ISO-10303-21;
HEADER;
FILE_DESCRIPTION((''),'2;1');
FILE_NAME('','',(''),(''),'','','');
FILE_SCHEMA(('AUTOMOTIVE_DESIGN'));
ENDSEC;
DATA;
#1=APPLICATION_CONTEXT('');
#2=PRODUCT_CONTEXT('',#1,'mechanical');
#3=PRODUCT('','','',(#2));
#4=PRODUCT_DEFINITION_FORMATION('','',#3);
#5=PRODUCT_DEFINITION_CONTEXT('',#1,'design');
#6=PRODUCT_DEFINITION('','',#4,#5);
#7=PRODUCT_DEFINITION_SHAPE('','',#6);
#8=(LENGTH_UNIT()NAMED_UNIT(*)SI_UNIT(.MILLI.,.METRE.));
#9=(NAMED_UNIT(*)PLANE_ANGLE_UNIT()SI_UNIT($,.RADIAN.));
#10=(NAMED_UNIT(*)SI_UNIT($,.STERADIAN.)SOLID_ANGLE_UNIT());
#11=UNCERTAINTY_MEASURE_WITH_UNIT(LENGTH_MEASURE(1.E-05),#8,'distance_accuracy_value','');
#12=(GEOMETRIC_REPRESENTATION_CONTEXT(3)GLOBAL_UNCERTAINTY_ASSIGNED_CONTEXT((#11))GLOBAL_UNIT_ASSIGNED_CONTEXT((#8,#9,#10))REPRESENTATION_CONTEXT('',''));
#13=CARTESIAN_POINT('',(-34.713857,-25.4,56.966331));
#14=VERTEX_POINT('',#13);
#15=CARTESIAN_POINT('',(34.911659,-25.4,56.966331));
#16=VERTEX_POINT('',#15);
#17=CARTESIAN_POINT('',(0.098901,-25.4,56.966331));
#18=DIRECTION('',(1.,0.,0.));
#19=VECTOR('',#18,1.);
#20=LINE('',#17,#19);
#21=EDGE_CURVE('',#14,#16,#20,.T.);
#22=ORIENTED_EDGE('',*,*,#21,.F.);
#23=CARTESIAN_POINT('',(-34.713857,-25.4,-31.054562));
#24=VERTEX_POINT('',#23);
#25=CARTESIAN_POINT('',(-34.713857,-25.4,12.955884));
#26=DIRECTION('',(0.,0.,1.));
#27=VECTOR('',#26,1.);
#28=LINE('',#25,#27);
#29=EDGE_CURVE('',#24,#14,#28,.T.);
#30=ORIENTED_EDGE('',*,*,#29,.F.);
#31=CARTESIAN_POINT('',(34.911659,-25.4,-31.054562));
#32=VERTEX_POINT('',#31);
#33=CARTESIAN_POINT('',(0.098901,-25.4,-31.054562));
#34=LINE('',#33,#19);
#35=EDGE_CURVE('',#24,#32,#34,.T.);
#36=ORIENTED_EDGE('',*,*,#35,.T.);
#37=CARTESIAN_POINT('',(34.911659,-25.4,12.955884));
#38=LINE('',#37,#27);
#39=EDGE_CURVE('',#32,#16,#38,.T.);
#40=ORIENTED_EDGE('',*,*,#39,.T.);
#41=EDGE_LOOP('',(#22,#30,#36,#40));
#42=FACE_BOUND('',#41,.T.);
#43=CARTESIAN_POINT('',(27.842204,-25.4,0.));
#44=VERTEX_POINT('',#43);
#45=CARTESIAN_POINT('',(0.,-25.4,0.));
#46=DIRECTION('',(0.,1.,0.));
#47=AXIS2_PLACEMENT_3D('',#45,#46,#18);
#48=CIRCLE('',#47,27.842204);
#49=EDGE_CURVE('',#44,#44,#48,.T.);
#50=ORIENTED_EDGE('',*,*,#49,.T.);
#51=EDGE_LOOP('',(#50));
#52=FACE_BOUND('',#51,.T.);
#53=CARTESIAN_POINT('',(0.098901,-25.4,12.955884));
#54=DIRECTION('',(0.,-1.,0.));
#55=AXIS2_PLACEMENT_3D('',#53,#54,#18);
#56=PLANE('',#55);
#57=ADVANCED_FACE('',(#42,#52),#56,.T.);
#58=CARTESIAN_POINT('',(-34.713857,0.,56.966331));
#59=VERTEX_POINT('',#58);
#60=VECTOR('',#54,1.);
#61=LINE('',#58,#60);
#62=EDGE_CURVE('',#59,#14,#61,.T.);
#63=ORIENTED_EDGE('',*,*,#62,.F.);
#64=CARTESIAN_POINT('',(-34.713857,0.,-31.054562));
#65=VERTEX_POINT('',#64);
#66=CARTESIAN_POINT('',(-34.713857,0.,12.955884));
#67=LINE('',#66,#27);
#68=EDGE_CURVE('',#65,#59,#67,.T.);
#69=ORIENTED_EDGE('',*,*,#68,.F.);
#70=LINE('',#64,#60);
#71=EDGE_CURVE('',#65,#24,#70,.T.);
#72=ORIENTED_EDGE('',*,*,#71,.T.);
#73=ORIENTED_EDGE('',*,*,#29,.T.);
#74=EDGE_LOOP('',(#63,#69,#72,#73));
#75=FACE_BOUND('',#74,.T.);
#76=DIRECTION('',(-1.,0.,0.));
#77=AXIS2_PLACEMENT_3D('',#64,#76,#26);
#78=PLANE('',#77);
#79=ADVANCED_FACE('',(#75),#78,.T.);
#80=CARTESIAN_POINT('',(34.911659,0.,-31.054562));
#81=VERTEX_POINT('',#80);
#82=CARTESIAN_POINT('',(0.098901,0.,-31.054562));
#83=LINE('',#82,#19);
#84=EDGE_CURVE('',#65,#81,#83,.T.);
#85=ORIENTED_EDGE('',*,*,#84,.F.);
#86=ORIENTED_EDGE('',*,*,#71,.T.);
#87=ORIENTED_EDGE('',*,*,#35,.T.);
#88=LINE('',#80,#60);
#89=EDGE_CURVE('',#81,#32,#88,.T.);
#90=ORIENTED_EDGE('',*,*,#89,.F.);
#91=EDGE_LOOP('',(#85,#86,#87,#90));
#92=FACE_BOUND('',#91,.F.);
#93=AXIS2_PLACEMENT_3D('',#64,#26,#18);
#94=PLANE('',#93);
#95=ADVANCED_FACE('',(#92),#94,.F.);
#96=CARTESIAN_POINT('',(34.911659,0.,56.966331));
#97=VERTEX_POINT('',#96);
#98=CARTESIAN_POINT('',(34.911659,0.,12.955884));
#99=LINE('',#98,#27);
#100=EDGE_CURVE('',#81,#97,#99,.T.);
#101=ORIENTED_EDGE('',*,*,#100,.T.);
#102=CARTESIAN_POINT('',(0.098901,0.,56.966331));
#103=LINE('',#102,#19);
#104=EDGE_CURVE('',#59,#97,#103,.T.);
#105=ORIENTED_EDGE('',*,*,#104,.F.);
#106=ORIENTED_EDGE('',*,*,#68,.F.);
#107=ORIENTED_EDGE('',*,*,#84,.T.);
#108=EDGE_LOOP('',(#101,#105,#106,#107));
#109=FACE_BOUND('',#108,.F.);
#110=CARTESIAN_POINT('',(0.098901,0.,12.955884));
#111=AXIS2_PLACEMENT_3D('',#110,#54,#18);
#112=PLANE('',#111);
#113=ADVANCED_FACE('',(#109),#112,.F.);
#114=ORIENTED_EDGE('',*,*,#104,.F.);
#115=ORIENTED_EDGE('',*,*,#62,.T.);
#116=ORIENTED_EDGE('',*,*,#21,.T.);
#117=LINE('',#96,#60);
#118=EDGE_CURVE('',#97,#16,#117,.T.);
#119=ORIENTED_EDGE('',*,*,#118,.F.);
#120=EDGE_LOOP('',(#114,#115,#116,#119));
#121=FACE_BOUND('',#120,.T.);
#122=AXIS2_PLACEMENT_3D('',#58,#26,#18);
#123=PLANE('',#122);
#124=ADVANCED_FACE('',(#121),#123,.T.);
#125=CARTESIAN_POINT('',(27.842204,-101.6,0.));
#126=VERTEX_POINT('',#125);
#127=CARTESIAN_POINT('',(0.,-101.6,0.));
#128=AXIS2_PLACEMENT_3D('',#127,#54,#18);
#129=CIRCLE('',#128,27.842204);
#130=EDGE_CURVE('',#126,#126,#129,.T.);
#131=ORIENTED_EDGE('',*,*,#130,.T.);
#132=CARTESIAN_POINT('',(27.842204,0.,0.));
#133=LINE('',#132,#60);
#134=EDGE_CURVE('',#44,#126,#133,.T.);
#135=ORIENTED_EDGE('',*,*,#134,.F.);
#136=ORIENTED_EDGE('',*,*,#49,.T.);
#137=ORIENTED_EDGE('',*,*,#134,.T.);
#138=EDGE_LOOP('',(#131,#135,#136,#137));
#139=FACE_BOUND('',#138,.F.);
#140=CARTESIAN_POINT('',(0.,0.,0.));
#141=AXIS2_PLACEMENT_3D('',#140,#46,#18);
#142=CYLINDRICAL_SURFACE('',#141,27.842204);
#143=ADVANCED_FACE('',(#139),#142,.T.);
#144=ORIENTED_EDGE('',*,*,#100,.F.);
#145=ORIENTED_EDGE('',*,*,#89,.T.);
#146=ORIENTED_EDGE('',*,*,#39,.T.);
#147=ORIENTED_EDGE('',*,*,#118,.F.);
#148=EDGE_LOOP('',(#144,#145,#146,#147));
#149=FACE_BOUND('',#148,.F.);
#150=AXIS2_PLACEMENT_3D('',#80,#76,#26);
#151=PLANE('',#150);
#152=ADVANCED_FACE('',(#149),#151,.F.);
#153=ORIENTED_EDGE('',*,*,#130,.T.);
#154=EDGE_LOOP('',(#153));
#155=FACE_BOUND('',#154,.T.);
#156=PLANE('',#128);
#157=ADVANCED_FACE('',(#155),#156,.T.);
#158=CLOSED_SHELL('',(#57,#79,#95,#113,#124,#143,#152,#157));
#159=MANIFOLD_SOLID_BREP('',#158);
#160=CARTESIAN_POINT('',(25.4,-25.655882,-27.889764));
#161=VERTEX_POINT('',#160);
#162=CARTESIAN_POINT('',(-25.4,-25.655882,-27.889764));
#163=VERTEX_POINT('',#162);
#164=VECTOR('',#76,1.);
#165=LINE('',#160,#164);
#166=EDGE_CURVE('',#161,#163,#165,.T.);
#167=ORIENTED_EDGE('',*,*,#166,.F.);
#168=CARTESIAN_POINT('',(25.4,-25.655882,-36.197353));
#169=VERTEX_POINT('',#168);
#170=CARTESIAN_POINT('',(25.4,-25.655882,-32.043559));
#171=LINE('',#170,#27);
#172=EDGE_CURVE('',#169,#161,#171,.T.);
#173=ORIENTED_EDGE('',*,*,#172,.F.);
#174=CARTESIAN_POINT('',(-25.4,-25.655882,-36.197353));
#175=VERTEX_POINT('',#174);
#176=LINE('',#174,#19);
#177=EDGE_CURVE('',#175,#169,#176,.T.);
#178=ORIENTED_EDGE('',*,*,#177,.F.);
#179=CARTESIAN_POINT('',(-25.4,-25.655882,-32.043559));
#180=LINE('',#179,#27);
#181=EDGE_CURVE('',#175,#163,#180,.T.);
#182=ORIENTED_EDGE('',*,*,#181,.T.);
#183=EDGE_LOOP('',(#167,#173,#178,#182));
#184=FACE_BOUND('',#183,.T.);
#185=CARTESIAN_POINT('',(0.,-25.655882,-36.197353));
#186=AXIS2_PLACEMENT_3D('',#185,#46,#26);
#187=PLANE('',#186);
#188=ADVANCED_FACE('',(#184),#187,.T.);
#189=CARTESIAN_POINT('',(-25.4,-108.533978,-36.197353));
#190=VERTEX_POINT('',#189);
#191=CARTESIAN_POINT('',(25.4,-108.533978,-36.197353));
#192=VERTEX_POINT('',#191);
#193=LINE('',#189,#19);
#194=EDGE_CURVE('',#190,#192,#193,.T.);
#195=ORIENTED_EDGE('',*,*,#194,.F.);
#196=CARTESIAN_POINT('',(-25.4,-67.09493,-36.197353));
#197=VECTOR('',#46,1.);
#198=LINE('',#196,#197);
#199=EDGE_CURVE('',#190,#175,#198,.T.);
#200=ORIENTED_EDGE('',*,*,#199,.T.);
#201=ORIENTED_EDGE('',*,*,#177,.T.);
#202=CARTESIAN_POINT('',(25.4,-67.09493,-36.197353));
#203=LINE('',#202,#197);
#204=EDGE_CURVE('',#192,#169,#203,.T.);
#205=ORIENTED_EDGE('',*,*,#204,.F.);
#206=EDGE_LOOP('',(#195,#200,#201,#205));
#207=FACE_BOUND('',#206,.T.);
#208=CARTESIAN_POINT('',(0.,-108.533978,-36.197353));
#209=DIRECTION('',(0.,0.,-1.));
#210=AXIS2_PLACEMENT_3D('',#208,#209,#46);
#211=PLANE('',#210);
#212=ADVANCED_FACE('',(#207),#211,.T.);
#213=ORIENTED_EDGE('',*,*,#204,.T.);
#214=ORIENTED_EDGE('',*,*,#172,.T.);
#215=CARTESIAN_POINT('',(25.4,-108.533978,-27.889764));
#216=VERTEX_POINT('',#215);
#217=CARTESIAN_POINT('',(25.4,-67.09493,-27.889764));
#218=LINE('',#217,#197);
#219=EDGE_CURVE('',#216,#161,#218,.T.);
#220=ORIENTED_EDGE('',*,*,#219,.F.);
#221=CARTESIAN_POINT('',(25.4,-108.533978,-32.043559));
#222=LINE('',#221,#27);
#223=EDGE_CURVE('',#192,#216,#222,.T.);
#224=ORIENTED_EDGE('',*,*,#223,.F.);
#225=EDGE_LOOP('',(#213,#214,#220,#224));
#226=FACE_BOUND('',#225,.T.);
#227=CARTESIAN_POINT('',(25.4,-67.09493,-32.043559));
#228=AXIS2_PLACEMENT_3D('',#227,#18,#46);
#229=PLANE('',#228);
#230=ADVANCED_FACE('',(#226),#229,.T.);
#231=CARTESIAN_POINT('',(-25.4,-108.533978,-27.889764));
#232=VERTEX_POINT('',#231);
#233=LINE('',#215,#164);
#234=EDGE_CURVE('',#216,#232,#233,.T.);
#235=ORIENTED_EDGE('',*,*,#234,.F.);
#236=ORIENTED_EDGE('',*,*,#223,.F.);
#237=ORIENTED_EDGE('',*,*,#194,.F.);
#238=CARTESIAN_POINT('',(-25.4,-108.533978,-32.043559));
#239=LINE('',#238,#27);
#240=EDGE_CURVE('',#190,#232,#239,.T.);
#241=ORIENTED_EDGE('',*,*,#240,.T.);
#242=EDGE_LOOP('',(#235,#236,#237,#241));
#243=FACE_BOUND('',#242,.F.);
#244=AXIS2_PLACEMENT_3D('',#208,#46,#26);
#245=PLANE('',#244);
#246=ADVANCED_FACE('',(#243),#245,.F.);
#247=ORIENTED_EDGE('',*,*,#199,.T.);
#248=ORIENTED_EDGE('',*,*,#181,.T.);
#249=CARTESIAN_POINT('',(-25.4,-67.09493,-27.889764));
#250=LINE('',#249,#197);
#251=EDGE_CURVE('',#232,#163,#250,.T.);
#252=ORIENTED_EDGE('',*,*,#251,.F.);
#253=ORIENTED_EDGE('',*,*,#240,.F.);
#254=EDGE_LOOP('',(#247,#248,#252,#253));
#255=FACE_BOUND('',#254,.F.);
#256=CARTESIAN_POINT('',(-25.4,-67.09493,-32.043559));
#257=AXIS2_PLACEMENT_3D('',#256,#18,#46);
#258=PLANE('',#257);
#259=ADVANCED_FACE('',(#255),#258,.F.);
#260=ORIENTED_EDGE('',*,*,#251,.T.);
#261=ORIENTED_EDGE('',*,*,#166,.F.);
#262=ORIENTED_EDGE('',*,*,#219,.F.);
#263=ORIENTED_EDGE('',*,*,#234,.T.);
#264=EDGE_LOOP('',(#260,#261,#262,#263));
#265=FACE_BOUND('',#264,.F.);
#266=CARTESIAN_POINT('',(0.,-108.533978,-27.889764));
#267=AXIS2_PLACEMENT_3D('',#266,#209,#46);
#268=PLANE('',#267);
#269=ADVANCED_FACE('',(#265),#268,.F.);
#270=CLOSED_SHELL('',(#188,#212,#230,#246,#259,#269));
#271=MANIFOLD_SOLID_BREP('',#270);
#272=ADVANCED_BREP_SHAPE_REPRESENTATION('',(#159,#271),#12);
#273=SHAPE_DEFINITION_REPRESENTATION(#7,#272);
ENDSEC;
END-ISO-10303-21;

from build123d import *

# Parameters (mm, degrees)
F0_R     = 27.8422041497
F1_DEPTH = 101.6
F2_W     = 69.6255154908
F2_H     = 88.0208928138
F3_DEPTH = 25.4
F4_W     = 82.8780960292
F4_H     = 8.307589218
F5_DEPTH = 25.4
F6_DEPTH = 25.4


# Not quite as in the source:
# - the program builds the solid bodies; features that only make, move or delete a surface that nothing else refers to are left out


with BuildPart() as f1:
    # F0 (on Front) → F1 (new body)
    with BuildSketch(Plane.XZ):
        Circle(F0_R)
    extrude(amount=F1_DEPTH)

    # F2 (on Front) → F3 (join)
    with BuildSketch(Plane.XZ):
        with Locations((0.0989008695, 12.9558844492)):
            Rectangle(F2_W, F2_H)
    extrude(amount=F3_DEPTH)


with BuildPart() as f5:
    # F4 (on Right) → F5 (new body)
    with BuildSketch(Plane.YZ):
        with Locations((-67.0949304476, -32.0435585454)):
            Rectangle(F4_W, F4_H)
    extrude(amount=F5_DEPTH)

    # F6 (add): a face of the model
    f6_faces = [f5.faces().sort_by_distance(p)[0] for p in [
        (0, -67.0949304476, -32.0435585454),
    ]]
    extrude(f6_faces, amount=F6_DEPTH)


solid = Compound([f1.part, f5.part])
